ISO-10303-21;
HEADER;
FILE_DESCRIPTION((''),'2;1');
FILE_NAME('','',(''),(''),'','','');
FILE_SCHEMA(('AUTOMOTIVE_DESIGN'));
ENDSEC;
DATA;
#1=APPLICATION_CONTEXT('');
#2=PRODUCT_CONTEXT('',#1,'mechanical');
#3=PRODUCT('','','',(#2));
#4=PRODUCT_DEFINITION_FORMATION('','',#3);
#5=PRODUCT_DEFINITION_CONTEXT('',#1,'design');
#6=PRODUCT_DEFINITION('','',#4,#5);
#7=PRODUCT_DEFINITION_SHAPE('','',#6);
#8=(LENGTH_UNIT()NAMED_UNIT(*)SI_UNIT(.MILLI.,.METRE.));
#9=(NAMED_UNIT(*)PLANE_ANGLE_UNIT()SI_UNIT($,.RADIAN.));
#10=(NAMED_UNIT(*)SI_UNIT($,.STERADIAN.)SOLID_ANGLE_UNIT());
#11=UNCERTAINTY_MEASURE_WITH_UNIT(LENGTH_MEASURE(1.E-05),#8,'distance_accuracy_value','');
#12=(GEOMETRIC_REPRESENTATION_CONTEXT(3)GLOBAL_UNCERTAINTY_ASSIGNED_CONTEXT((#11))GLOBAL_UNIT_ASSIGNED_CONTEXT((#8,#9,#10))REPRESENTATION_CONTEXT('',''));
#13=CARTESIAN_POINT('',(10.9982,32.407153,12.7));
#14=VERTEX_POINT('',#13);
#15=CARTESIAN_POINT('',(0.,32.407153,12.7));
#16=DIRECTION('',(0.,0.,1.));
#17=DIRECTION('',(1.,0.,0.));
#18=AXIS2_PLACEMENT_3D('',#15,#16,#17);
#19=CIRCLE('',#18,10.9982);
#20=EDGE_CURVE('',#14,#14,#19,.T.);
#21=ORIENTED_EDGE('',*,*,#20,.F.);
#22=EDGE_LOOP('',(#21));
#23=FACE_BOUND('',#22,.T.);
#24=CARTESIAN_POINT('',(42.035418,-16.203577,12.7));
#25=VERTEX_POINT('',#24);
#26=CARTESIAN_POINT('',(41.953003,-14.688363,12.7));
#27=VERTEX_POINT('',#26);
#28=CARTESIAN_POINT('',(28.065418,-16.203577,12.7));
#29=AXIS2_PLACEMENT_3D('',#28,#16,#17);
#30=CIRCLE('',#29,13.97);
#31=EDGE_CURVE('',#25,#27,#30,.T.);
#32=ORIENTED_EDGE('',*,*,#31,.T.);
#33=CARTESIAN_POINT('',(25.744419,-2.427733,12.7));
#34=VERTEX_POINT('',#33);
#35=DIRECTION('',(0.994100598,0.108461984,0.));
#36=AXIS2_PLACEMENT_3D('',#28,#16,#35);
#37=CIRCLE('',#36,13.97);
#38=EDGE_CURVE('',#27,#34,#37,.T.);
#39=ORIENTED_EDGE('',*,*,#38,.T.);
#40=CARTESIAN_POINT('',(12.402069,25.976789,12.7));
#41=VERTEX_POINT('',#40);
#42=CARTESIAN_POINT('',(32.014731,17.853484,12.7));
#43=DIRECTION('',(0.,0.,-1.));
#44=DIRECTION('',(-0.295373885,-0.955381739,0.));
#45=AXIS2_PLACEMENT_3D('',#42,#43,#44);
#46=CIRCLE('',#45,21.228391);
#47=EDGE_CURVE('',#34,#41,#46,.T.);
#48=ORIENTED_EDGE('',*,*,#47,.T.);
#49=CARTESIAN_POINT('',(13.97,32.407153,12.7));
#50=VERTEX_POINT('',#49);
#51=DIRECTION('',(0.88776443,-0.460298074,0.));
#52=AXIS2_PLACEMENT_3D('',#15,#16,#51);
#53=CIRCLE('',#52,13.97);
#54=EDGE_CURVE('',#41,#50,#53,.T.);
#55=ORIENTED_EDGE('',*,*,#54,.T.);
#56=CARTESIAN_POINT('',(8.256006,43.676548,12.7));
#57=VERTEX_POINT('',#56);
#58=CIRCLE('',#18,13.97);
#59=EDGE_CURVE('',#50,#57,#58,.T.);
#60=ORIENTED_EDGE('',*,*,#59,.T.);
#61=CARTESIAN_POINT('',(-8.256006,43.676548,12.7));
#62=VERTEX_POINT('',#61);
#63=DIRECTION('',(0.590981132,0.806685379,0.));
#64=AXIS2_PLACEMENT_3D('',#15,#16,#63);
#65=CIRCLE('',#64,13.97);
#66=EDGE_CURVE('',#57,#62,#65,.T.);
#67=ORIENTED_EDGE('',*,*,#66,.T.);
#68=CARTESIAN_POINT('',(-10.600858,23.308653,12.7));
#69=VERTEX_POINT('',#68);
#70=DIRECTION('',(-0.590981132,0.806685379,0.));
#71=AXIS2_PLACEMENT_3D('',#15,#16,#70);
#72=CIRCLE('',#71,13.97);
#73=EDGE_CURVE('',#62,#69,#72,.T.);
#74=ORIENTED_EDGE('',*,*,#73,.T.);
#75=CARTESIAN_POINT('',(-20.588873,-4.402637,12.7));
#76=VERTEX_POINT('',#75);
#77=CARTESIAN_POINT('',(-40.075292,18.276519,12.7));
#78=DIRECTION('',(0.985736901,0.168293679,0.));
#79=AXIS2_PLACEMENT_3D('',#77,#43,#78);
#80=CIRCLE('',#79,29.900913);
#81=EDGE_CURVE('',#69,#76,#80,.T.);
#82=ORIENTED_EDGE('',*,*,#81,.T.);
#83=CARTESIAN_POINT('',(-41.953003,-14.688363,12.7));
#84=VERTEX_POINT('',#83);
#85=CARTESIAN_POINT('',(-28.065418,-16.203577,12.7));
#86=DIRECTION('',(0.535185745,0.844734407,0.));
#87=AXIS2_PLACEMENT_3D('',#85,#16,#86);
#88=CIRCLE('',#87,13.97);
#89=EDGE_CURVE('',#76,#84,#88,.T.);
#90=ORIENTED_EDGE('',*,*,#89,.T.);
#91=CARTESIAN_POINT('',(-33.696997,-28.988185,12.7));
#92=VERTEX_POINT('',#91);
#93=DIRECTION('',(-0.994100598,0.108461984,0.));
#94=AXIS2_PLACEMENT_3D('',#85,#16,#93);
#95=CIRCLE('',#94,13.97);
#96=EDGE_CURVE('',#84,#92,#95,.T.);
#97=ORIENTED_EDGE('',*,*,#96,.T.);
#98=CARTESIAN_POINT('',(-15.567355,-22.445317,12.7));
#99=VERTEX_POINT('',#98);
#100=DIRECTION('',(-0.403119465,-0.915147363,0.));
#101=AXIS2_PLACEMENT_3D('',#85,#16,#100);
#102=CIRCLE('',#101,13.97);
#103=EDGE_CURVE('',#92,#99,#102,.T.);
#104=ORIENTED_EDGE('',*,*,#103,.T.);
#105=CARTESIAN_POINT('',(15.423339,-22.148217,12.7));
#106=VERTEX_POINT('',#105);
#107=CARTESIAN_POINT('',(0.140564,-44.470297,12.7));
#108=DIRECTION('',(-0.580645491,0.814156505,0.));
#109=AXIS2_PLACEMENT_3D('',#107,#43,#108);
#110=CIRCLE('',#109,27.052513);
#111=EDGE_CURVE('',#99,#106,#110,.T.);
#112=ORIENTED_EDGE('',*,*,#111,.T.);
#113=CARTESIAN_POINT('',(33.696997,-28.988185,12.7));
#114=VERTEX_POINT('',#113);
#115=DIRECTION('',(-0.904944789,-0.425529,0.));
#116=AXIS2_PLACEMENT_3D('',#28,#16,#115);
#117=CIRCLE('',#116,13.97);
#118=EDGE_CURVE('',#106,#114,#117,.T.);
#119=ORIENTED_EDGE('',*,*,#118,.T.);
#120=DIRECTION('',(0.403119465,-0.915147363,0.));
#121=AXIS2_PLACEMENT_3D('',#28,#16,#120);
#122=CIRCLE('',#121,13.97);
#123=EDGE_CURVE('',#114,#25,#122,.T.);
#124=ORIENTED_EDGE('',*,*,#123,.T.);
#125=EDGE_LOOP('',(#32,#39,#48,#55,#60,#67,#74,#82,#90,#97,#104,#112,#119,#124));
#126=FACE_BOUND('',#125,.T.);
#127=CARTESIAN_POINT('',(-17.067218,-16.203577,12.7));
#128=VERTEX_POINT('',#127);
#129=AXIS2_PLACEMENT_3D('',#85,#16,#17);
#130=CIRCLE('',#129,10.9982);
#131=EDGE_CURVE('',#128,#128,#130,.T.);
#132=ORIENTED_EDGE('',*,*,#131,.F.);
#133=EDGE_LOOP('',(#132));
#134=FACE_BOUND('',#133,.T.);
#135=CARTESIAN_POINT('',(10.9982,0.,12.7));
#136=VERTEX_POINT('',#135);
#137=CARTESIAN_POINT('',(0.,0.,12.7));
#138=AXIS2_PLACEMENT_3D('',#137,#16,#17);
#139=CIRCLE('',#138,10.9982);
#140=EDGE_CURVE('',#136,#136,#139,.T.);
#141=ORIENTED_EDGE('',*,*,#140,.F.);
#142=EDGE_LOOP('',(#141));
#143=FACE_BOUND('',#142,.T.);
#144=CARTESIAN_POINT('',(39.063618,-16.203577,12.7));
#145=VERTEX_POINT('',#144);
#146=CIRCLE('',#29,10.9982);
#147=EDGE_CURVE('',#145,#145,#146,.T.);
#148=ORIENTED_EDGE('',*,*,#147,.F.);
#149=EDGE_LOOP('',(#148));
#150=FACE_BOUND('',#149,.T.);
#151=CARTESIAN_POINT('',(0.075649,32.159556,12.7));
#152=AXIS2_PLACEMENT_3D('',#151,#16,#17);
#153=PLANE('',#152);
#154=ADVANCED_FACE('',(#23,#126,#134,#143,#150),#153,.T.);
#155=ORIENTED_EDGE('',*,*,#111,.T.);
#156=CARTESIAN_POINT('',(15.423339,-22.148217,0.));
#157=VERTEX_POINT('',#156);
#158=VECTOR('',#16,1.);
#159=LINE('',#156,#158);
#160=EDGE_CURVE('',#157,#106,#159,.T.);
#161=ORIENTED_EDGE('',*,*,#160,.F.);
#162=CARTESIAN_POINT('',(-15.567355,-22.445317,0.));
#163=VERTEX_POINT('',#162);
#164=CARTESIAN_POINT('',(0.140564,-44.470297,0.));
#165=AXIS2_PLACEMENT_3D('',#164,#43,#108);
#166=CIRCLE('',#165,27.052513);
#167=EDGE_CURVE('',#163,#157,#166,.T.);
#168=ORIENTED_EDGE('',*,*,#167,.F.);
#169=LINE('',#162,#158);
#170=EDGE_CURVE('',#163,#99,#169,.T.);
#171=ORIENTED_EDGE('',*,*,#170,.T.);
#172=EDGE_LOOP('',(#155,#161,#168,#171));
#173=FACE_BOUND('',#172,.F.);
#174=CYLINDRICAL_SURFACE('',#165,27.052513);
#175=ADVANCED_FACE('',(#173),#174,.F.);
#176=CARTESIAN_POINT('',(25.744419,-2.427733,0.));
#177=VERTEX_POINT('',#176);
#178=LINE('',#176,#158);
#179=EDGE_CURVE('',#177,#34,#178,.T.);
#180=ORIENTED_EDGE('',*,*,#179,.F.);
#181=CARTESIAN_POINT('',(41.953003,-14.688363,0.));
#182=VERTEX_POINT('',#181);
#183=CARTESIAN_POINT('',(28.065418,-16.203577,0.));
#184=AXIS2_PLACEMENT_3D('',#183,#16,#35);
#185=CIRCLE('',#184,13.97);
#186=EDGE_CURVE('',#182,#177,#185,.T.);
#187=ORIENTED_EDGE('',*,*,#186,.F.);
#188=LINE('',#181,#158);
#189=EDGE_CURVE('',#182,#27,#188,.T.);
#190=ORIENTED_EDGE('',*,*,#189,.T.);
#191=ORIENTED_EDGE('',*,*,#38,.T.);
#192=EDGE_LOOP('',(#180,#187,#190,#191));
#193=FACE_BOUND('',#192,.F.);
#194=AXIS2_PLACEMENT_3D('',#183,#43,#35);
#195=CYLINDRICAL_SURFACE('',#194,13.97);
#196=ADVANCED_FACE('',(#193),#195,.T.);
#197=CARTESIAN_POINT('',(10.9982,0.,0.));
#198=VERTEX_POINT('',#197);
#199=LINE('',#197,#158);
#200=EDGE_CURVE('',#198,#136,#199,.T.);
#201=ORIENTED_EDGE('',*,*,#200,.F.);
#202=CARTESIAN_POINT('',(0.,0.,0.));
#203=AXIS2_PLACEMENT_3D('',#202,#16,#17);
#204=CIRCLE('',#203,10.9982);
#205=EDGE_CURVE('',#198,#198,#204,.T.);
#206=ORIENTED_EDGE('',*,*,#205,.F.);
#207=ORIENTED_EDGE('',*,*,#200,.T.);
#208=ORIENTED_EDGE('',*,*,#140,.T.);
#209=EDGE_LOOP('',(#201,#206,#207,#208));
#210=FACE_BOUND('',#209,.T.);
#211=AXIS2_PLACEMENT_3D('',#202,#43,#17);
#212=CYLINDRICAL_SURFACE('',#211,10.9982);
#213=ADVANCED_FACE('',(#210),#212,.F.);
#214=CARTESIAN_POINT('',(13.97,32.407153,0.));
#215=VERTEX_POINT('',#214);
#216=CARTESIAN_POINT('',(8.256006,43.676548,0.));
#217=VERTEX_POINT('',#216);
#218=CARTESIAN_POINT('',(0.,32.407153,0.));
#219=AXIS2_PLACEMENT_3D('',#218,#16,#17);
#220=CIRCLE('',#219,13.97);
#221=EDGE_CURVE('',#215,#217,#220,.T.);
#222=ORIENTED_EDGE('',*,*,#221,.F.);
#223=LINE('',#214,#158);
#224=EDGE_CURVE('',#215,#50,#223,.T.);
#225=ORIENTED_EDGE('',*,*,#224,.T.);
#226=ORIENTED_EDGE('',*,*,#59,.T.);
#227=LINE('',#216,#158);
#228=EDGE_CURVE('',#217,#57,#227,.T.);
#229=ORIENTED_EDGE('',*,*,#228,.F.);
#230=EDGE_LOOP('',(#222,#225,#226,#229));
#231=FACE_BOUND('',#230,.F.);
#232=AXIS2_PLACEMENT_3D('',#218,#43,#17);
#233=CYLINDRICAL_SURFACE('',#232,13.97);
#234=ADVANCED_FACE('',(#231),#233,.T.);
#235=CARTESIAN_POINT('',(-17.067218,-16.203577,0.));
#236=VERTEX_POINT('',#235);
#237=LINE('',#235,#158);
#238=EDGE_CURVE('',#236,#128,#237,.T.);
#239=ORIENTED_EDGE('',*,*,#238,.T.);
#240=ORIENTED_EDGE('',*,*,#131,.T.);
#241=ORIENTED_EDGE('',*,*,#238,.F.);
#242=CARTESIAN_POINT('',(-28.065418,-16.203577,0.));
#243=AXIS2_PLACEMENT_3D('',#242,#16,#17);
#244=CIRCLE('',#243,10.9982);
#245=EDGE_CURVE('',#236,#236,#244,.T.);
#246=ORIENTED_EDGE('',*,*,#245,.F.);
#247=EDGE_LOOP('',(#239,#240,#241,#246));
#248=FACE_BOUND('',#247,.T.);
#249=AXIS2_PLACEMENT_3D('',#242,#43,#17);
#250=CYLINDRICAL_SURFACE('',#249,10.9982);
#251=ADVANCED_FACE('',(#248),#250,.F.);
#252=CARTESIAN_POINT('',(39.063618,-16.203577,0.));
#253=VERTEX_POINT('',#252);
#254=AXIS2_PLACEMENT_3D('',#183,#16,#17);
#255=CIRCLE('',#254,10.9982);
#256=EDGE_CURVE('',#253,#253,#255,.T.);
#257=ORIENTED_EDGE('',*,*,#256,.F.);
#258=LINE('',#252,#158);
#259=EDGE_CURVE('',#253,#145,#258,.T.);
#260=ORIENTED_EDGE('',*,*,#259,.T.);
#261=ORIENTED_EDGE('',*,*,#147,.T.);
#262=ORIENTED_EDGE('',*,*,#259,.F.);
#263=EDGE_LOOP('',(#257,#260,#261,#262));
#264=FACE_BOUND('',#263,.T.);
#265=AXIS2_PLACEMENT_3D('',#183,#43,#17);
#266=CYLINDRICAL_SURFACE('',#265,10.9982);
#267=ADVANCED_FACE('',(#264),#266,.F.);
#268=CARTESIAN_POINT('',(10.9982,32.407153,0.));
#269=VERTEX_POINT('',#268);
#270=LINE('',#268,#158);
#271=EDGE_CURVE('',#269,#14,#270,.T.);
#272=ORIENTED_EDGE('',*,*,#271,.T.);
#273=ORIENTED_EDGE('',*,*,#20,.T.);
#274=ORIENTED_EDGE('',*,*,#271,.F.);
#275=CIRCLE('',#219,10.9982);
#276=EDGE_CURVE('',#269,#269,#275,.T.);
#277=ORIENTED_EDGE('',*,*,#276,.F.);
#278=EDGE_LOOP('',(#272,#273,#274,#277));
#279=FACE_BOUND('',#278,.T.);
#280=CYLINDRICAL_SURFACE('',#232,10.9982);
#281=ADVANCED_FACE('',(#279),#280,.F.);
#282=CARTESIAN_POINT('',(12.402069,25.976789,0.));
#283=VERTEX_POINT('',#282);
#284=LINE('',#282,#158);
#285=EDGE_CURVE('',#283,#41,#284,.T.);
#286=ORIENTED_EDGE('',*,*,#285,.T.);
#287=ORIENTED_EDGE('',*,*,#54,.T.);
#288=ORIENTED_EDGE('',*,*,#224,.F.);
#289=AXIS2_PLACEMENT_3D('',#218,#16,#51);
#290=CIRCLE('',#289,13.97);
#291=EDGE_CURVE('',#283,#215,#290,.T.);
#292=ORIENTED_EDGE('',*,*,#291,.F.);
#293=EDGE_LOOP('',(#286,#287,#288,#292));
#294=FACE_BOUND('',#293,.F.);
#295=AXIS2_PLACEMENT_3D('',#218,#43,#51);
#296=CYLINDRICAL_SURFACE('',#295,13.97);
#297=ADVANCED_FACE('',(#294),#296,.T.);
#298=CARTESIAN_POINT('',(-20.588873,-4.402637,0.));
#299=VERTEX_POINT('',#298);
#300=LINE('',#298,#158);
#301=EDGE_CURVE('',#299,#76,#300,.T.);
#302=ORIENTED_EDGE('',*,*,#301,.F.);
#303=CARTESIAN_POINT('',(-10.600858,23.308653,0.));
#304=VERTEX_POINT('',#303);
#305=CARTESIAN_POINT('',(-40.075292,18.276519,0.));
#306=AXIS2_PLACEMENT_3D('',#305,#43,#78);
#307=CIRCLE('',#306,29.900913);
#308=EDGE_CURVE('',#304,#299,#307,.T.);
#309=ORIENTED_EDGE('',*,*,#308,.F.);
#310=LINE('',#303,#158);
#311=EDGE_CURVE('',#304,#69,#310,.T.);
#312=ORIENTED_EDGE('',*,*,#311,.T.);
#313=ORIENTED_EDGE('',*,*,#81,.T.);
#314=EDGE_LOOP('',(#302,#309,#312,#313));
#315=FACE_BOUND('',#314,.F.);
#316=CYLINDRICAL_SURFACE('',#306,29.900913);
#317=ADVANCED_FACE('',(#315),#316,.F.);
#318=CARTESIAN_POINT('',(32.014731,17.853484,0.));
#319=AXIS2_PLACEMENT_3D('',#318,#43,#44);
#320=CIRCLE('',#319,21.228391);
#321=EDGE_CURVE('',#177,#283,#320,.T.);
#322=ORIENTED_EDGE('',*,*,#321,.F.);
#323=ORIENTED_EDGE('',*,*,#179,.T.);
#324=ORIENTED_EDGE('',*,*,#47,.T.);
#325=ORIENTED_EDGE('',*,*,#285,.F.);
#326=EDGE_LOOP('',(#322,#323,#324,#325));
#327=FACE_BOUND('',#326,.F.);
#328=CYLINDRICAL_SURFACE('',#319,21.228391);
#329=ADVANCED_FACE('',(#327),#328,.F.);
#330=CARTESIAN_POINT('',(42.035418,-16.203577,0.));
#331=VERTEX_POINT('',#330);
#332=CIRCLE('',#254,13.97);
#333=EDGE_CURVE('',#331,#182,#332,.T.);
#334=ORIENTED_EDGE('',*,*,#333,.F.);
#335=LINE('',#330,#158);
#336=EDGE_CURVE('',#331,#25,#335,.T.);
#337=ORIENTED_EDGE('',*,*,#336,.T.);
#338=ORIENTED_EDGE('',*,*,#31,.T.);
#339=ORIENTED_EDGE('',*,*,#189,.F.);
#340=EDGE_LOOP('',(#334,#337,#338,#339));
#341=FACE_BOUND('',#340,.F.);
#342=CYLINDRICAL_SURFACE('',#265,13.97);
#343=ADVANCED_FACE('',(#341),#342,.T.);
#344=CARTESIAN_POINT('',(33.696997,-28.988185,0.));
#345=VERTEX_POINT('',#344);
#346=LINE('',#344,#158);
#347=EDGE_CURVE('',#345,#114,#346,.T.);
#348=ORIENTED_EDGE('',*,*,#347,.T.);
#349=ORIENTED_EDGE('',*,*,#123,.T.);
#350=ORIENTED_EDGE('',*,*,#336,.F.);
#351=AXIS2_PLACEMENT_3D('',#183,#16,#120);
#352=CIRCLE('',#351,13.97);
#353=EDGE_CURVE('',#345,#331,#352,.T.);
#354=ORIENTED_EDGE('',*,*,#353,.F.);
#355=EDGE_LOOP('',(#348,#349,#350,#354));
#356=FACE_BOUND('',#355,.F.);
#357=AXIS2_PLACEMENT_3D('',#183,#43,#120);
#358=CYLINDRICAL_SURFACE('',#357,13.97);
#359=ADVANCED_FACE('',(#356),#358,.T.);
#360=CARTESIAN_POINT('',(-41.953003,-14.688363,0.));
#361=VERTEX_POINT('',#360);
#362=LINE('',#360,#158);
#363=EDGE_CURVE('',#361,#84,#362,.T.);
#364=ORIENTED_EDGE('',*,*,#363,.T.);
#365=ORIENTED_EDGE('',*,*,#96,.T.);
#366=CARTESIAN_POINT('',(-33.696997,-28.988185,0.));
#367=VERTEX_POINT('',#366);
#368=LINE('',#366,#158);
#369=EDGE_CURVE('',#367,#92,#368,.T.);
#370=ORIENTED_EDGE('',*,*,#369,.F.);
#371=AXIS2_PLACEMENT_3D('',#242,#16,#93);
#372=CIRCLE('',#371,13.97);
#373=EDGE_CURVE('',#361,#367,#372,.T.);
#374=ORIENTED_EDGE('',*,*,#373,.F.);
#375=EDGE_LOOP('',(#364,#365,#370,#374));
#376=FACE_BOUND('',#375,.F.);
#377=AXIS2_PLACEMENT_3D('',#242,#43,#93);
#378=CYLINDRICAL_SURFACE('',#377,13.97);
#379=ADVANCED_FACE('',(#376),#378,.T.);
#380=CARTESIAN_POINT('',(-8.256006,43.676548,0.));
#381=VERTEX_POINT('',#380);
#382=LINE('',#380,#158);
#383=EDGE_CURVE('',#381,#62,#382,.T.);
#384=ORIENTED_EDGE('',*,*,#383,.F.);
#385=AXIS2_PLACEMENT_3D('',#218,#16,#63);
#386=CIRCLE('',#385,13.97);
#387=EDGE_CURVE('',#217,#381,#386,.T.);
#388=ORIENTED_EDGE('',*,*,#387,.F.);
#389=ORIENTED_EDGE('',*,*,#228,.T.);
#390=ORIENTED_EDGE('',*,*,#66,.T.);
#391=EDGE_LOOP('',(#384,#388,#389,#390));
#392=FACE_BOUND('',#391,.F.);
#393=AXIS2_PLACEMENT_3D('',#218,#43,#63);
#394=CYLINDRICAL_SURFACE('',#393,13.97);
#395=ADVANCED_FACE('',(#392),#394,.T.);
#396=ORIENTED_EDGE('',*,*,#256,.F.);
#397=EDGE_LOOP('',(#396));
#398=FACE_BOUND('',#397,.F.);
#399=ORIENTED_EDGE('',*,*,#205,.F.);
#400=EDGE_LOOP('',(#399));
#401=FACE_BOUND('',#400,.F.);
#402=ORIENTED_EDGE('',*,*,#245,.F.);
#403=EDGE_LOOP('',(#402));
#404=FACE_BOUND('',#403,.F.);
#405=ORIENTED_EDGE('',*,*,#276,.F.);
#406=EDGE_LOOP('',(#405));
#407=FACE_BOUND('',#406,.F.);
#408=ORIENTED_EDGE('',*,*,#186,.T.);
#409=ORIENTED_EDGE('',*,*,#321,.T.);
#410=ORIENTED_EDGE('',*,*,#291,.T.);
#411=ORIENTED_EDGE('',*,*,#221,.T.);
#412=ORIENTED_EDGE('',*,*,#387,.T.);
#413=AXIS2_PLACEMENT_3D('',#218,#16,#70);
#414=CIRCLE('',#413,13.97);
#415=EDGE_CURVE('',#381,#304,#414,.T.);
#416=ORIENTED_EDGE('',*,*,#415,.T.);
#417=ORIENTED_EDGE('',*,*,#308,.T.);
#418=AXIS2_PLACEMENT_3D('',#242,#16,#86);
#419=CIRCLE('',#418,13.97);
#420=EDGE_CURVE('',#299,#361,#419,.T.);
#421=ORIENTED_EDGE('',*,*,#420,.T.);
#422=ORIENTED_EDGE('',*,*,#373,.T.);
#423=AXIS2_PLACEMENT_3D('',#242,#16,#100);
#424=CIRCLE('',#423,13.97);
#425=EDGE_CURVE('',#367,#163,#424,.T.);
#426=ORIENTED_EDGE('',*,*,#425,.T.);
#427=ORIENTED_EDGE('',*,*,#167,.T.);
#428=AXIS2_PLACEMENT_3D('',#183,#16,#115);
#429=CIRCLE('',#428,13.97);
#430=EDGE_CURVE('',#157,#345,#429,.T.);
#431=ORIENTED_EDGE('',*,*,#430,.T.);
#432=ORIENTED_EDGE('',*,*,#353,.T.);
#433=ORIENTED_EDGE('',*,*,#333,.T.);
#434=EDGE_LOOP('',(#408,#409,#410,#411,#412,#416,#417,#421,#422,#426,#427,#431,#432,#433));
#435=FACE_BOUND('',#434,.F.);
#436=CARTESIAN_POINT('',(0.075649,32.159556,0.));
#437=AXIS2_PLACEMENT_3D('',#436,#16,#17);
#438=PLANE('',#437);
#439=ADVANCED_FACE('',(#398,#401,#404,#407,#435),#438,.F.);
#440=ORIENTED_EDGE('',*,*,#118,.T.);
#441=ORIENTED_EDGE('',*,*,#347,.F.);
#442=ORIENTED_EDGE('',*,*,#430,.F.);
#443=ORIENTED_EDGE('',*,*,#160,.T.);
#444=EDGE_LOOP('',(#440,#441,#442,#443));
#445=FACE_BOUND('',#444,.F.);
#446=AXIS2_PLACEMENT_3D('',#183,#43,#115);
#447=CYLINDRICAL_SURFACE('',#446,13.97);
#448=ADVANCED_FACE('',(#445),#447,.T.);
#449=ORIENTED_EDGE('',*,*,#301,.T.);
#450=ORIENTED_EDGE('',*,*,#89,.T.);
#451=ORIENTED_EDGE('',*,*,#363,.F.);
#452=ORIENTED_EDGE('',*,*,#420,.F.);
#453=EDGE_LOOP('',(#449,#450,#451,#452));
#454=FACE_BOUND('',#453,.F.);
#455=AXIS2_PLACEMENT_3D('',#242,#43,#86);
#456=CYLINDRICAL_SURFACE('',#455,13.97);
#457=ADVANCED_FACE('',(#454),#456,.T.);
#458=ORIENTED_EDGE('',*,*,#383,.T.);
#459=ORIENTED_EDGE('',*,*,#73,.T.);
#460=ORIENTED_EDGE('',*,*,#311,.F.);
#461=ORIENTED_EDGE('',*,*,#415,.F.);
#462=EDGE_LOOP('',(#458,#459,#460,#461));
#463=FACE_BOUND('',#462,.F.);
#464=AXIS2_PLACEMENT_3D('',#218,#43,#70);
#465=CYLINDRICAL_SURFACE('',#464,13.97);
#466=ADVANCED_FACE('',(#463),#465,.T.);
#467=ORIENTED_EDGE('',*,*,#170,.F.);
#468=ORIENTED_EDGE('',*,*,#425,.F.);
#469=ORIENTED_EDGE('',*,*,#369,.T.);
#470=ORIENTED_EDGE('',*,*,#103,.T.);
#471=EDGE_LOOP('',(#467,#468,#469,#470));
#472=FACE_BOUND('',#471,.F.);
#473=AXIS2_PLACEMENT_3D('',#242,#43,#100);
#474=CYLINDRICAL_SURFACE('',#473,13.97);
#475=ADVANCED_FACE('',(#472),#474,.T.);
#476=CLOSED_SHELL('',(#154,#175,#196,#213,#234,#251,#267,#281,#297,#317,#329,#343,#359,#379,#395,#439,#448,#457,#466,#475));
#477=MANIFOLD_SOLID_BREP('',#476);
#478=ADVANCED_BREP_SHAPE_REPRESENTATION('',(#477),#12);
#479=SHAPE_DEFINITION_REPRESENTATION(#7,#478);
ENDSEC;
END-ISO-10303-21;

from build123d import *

# Parameters (mm, degrees)
F0_R     = 10.9982
F0_R_2   = 13.97
F1_DEPTH = 12.7


with BuildPart() as f1:
    # F0 (on Top) → F1 (new body)
    with BuildSketch(Plane.XY):
        with BuildLine():
            ThreePointArc((13.97, 32.4071533978), (12.4598818148, 38.7247672797), (8.2560064193, 43.6765481466))
            ThreePointArc((8.2560064193, 43.6765481466), (0, 44.45), (-8.2560064193, 43.6765481466))
            ThreePointArc((-8.2560064193, 43.6765481466), (-13.8783328045, 34.0048951062), (-10.600858317, 23.3086533597))
            ThreePointArc((-10.600858317, 23.3086533597), (1.6096047371, 18.5301914612), (12.4020690853, 25.9767893021))
            ThreePointArc((12.4020690853, 25.9767893021), (13.5723580324, 29.097773178), (13.97, 32.4071533978))
        make_face()
        with Locations((0, 32.4071533978)):
            Circle(F0_R, mode=Mode.SUBTRACT)
        with BuildLine():
            ThreePointArc((-8.2560064193, 43.6765481466), (0, 44.45), (8.2560064193, 43.6765481466))
            ThreePointArc((8.2560064193, 43.6765481466), (0, 46.3771533978), (-8.2560064193, 43.6765481466))
        make_face()
        with BuildLine():
            ThreePointArc((42.0354181068, -16.2035766989), (42.0147992276, -15.4448499046), (41.9530034542, -14.6883627804))
            ThreePointArc((41.9530034542, -14.6883627804), (38.4948291982, -22.225), (33.696997035, -28.9881853662))
            ThreePointArc((33.696997035, -28.9881853662), (39.7665731273, -23.8353439377), (42.0354181068, -16.2035766989))
        make_face()
        with BuildLine():
            ThreePointArc((33.696997035, -28.9881853662), (38.4948291982, -22.225), (41.9530034542, -14.6883627804))
            ThreePointArc((41.9530034542, -14.6883627804), (36.4931838712, -5.0620478891), (25.7444185967, -2.4277333028))
            ThreePointArc((25.7444185967, -2.4277333028), (15.6881084253, -9.7256831332), (15.4233394109, -22.1482168264))
            ThreePointArc((15.4233394109, -22.1482168264), (23.1681669233, -29.287071295), (33.696997035, -28.9881853662))
        make_face()
        with Locations((28.0654181068, -16.2035766989)):
            Circle(F0_R, mode=Mode.SUBTRACT)
        with BuildLine():
            ThreePointArc((15.4233394109, -22.1482168264), (15.6881084253, -9.7256831332), (25.7444185967, -2.4277333028))
            ThreePointArc((25.7444185967, -2.4277333028), (12.8005092874, 8.8280600033), (12.4020690853, 25.9767893021))
            ThreePointArc((12.4020690853, 25.9767893021), (1.6096047371, 18.5301914612), (-10.600858317, 23.3086533597))
            ThreePointArc((-10.600858317, 23.3086533597), (-11.9457670792, 8.1377589695), (-20.5888732511, -4.4026370321))
            ThreePointArc((-20.5888732511, -4.4026370321), (-15.8259689437, -9.4688321468), (-14.0954181068, -16.2035766989))
            ThreePointArc((-14.0954181068, -16.2035766989), (-14.4683809608, -19.410051531), (-15.5673552362, -22.4453172))
            ThreePointArc((-15.5673552362, -22.4453172), (-0.1187696418, -17.419026699), (15.4233394109, -22.1482168264))
        make_face()
        Circle(F0_R_2, mode=Mode.SUBTRACT)
        with BuildLine():
            ThreePointArc((-20.5888732511, -4.4026370321), (-34.1254839966, -3.6164204906), (-41.9530034542, -14.6883627804))
            ThreePointArc((-41.9530034542, -14.6883627804), (-38.4948291982, -22.225), (-33.696997035, -28.9881853662))
            ThreePointArc((-33.696997035, -28.9881853662), (-23.3231157764, -29.3440283124), (-15.5673552362, -22.4453172))
            ThreePointArc((-15.5673552362, -22.4453172), (-14.4683809608, -19.410051531), (-14.0954181068, -16.2035766989))
            ThreePointArc((-14.0954181068, -16.2035766989), (-15.8259689437, -9.4688321468), (-20.5888732511, -4.4026370321))
        make_face()
        with Locations((-28.0654181068, -16.2035766989)):
            Circle(F0_R, mode=Mode.SUBTRACT)
        with BuildLine():
            ThreePointArc((-33.696997035, -28.9881853662), (-38.4948291982, -22.225), (-41.9530034542, -14.6883627804))
            ThreePointArc((-41.9530034542, -14.6883627804), (-40.1637929977, -23.1885766989), (-33.696997035, -28.9881853662))
        make_face()
        Circle(F0_R_2)
        Circle(F0_R, mode=Mode.SUBTRACT)
    extrude(amount=F1_DEPTH)


solid = f1.part
